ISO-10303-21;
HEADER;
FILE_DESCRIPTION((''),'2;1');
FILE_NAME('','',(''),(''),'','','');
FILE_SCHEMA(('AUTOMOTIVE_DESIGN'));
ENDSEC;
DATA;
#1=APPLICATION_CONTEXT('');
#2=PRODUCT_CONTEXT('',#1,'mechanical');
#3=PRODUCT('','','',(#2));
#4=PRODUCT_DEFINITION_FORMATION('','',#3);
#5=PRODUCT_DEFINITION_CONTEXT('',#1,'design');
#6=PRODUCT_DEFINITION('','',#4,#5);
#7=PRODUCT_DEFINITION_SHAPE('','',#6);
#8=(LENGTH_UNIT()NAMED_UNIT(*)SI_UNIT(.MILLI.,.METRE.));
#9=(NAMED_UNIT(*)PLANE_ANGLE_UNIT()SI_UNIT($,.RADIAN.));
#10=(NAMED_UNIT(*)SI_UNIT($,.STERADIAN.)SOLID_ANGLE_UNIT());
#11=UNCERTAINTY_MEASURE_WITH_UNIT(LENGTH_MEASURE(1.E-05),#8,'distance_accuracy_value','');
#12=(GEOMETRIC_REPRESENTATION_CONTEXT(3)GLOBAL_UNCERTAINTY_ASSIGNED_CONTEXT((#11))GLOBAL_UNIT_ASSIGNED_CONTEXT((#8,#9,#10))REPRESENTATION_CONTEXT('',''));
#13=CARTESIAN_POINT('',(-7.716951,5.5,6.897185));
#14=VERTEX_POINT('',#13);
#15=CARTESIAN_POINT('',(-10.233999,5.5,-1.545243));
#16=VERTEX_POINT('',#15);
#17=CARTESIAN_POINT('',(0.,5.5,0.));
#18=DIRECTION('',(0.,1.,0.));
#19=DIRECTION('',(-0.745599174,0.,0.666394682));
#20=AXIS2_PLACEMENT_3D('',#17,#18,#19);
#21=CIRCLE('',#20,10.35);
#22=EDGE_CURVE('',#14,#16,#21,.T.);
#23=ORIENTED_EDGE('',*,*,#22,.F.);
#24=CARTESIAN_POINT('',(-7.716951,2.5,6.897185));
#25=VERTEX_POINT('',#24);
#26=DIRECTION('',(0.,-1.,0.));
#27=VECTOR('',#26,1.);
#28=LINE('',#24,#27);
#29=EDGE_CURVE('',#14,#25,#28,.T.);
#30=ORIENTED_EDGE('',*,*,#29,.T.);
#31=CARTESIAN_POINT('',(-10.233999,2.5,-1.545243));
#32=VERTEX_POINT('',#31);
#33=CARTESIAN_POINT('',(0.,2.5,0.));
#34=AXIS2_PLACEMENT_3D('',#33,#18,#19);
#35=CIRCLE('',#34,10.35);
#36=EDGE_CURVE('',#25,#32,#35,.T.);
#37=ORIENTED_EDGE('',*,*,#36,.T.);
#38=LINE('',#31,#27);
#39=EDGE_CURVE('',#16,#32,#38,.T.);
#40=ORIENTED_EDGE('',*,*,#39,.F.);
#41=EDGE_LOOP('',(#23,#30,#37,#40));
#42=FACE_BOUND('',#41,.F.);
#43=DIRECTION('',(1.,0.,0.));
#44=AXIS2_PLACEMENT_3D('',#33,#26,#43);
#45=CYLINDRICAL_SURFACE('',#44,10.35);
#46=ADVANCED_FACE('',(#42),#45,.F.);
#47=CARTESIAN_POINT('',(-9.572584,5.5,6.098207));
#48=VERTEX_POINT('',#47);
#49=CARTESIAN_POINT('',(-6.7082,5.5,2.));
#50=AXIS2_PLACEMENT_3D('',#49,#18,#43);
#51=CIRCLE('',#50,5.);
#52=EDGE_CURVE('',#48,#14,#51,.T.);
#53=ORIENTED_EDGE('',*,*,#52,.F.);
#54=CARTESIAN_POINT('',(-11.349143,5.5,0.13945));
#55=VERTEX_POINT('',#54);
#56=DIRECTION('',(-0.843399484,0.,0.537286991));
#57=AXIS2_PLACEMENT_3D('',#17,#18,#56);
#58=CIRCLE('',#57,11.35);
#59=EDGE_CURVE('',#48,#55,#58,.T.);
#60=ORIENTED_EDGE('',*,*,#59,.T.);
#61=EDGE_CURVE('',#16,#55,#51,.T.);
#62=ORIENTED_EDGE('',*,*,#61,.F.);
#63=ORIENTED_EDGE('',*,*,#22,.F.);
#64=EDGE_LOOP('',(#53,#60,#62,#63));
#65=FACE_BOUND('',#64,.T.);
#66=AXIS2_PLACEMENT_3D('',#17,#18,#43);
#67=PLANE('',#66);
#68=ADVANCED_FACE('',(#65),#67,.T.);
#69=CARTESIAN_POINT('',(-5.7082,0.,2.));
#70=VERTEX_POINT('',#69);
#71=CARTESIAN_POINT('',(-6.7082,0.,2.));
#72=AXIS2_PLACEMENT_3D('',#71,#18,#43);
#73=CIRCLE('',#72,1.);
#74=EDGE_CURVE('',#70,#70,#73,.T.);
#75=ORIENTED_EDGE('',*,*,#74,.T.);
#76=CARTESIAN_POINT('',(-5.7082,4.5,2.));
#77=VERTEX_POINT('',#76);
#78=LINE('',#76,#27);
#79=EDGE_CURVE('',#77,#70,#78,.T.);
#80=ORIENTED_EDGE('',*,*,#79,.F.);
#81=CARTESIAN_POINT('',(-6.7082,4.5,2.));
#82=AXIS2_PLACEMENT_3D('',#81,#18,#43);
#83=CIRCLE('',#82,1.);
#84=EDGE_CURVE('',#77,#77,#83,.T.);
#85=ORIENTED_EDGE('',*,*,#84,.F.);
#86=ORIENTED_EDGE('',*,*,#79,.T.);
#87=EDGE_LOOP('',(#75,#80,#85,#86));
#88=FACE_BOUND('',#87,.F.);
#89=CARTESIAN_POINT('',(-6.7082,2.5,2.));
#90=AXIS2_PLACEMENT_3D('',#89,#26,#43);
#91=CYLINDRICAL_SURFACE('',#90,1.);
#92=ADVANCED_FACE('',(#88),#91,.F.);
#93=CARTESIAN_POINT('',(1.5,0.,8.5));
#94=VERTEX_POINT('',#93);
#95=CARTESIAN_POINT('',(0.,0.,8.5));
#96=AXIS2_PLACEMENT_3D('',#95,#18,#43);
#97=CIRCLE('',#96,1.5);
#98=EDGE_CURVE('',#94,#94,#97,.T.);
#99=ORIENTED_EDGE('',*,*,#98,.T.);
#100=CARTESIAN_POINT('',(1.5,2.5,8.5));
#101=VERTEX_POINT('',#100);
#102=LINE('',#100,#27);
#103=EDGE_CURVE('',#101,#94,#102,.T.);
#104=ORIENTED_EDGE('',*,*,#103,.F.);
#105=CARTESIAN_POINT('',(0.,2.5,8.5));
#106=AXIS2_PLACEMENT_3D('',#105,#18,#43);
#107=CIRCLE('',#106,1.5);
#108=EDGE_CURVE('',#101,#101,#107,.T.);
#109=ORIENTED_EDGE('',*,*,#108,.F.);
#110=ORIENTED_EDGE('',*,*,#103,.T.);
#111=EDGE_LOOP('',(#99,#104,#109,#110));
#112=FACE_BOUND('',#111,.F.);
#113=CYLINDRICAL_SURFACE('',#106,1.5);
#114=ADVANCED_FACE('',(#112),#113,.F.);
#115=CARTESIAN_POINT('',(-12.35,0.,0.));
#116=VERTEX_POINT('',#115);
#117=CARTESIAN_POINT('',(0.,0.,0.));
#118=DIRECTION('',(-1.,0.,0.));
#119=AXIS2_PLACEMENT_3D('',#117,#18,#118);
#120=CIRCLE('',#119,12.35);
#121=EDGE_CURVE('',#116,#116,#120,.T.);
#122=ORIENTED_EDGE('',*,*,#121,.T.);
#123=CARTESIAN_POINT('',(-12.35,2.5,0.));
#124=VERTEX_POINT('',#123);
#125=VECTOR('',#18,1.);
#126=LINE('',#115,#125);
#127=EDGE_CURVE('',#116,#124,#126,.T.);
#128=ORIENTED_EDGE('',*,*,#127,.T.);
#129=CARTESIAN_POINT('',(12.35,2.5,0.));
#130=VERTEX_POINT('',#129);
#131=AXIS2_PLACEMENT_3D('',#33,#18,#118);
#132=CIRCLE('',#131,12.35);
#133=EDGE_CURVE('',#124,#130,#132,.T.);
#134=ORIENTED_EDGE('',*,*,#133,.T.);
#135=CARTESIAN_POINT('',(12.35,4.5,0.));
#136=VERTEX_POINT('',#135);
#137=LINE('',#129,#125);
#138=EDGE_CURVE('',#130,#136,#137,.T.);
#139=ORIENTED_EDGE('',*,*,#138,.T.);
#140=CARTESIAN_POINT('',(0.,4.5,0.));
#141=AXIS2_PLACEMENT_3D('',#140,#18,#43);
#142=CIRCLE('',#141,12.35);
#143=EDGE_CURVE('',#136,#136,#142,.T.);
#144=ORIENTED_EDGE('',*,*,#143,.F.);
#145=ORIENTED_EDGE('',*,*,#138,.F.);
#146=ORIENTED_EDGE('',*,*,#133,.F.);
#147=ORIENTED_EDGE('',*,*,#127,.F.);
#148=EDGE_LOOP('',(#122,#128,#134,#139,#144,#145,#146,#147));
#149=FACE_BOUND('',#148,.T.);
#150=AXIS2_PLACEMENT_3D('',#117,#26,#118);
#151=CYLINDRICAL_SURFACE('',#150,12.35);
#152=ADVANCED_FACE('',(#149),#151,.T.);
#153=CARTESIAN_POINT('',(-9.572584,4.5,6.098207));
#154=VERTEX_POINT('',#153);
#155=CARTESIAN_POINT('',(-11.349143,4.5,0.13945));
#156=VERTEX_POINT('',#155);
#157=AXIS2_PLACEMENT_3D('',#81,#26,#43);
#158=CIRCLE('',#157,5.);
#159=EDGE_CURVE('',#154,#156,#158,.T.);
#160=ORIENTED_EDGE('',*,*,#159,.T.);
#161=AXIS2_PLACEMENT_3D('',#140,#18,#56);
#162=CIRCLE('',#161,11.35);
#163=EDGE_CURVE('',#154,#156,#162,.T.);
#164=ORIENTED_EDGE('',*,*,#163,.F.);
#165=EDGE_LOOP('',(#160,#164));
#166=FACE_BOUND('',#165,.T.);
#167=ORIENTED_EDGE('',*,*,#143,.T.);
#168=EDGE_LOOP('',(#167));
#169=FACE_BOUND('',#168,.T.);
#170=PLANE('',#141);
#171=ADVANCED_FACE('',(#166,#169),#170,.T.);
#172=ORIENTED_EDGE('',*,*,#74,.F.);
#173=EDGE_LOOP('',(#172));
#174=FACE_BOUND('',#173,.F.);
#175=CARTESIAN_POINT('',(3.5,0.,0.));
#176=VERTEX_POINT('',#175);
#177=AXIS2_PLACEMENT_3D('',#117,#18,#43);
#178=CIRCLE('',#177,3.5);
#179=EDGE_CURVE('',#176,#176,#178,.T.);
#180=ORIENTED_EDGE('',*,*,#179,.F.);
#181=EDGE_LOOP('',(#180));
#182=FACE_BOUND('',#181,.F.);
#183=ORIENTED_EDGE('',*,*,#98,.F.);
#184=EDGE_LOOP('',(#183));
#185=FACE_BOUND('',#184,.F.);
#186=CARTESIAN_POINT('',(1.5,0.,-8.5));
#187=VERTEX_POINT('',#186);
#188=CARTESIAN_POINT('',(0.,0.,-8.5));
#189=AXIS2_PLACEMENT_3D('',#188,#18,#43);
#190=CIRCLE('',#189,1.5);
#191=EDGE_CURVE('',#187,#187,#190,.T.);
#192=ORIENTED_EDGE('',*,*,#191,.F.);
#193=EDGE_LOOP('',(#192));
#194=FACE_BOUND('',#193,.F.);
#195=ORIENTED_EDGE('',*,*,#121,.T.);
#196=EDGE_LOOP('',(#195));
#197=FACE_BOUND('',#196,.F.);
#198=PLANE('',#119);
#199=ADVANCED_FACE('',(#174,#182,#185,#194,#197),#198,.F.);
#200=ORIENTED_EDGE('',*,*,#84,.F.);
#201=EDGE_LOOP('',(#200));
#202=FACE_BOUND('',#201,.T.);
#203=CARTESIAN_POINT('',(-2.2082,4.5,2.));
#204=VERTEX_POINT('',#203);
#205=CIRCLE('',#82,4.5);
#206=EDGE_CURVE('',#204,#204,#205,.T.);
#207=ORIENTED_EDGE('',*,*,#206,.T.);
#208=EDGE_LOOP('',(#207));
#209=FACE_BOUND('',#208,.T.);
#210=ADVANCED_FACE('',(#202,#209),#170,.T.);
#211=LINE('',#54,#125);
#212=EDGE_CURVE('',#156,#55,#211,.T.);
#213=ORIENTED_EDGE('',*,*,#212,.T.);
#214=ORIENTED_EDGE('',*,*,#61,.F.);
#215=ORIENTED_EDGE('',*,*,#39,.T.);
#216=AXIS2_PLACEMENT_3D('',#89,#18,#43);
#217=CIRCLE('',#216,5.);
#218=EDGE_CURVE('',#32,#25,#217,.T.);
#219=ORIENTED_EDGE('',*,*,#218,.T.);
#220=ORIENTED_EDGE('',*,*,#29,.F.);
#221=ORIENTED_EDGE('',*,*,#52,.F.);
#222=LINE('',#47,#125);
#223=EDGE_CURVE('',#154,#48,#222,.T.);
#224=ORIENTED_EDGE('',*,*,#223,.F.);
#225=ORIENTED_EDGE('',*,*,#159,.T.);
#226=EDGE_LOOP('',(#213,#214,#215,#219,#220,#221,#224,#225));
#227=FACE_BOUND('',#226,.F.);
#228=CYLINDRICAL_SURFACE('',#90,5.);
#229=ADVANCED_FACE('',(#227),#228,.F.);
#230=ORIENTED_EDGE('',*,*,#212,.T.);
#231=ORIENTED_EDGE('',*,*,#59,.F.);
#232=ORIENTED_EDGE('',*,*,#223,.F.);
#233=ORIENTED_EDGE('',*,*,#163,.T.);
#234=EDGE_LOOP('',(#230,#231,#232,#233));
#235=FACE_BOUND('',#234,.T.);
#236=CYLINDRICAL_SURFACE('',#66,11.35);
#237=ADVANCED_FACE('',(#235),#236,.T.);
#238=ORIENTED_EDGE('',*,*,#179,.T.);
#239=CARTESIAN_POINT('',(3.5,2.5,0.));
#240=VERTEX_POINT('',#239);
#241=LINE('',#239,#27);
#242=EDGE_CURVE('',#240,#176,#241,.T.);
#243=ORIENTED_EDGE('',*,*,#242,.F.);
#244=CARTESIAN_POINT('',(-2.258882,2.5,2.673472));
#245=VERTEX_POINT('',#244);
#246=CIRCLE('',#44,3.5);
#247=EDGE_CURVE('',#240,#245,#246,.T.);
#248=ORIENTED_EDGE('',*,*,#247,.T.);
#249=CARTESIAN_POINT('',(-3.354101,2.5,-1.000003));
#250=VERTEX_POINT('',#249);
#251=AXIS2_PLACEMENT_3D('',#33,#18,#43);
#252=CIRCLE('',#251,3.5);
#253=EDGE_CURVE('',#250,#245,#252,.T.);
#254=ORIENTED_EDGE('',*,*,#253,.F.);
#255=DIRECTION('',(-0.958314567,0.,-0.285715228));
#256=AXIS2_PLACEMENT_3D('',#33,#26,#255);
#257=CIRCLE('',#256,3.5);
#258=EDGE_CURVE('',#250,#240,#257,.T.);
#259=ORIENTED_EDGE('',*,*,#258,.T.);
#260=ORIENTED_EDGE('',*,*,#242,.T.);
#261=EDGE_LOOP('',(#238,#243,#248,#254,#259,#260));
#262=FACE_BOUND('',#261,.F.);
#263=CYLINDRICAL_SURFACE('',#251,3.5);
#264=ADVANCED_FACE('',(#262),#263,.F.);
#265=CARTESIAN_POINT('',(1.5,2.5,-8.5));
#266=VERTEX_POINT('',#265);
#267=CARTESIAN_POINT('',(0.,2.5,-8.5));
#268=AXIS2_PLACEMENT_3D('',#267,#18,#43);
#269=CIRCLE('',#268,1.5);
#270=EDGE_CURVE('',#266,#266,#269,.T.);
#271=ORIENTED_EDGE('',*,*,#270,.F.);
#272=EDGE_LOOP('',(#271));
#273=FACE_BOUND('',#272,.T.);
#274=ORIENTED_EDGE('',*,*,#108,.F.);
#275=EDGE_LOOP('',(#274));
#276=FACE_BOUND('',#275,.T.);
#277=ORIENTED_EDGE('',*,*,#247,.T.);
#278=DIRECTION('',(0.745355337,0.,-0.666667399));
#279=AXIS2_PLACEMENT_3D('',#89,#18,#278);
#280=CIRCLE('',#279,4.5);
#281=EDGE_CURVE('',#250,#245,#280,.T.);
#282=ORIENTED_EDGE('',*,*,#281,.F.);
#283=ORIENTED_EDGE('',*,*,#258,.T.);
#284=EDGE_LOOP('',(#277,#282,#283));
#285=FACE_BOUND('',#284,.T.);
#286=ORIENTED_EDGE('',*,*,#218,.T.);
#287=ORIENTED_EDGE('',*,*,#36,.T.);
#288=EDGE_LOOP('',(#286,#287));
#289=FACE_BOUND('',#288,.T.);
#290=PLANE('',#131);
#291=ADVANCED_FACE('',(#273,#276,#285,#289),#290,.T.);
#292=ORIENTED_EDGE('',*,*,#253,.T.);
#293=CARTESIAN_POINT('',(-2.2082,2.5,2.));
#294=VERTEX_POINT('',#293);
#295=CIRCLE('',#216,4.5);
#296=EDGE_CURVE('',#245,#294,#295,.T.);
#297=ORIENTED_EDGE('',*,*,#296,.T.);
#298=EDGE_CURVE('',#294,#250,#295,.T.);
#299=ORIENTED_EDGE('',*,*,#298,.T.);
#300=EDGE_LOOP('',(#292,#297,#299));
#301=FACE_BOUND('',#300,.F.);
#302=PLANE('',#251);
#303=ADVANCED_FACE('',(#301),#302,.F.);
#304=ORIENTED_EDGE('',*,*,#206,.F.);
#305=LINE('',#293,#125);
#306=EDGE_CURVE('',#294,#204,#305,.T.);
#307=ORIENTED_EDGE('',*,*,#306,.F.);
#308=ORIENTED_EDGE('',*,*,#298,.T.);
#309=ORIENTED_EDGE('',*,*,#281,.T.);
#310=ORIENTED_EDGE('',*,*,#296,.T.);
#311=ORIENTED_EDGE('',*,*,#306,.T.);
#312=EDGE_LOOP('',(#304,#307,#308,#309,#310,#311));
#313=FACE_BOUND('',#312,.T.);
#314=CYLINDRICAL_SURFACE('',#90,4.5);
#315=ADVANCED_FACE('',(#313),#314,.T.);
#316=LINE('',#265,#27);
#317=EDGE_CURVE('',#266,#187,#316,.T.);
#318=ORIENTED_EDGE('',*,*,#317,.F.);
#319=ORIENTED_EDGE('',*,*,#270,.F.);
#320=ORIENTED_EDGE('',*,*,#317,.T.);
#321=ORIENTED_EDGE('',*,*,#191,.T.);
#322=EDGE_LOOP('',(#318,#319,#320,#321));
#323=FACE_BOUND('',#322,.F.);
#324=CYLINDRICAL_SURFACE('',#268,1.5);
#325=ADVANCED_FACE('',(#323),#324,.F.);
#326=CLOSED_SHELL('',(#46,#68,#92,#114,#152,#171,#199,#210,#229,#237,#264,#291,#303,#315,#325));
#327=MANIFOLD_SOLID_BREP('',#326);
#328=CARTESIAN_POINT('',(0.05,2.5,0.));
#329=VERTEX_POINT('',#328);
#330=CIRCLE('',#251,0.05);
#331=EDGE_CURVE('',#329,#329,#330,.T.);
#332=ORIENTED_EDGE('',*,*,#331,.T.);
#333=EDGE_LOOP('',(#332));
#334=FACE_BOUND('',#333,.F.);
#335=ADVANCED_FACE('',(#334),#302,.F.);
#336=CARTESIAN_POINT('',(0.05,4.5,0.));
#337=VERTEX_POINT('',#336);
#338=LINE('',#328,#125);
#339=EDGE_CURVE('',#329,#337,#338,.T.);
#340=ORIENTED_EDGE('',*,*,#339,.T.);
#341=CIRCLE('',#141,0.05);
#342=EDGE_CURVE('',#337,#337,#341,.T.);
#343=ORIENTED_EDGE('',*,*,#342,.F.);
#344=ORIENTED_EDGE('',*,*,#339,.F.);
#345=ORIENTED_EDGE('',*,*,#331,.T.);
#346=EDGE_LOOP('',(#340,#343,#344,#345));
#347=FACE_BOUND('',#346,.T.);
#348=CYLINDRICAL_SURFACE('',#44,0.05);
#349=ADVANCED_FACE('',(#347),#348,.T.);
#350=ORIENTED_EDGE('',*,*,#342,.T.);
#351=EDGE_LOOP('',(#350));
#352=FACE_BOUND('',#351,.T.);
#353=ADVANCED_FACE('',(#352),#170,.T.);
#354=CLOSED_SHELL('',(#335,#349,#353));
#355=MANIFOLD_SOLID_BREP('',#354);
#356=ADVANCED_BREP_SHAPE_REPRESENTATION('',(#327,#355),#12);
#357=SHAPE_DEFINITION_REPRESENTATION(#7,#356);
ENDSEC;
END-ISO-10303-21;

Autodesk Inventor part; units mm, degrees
ref_plane "YZ Plane" through (0, 0, 0) normal (1, 0, 0) x (0, 1, 0)
ref_plane "XZ Plane" through (0, 0, 0) normal (0, 1, 0) x (-1, 0, 0)
ref_plane "XY Plane" through (0, 0, 0) normal (0, 0, 1) x (1, 0, 0)
sketch "Szkic1" plane through (0, 0, 0) normal (0, 1, 0) x (-1, 0, 0)
  circle A0 centre (0, 0) radius 12.35
  dimension "d0" = 24.7
extrude "Wyciągnięcie proste1" add sketch "Szkic1" along normal blind 2.5
sketch "Szkic2" plane through (0, 2.5, 0) normal (0, 1, 0) x (1, 0, 0)
  circle A0 centre (0, 0) radius 3.5
  dimension "d3" = 7
extrude "Wyciągnięcie proste2" cut sketch "Szkic2" against normal blind 2.5
sketch "Szkic3" plane through (0, 2.5, 0) normal (0, 1, 0) x (1, 0, 0)
  circle A0 centre (0, -8.5) radius 1.5
  circle A1 centre (0, 8.5) radius 1.5
  point P0 (0, 0)
  dimension "d6" = 3
  dimension "d7" = 3
  dimension "d8" = 17
  dimension "d9" = 8.5
extrude "Wyciągnięcie proste3" cut sketch "Szkic3" against normal blind 2.5
sketch "Szkic4" plane through (0, 2.5, 0) normal (0, 1, 0) x (1, 0, 0)
  circle A0 centre (-6.7082, -2) radius 1
  circle A1 centre (-5.7446, 4) radius 1 construction
  point P0 (0, 0)
  dimension "d12" = 2
  dimension "d13" = 7
  dimension "d31" = 2
  dimension "d32" = 7
  dimension "d33" = 6
  dimension "d34" = 2
extrude "Wyciągnięcie proste4" cut sketch "Szkic4" against normal blind 2.5
sketch "Szkic6" plane through (0, 2.5, 0) normal (0, 1, 0) x (1, 0, 0)
  circle A0 centre (0, 0) radius 12.35
  circle A1 centre (0, 0) radius 10.35
  circle A2 centre (0, 0) radius 12.35 projected
  dimension "d19" = 2
  dimension "d20" = 0
extrude "Wyciągnięcie proste6" add sketch "Szkic6" along normal blind 3
sketch "Szkic7" plane through (0, 5.5, 0) normal (0, 1, 0) x (1, 0, 0)
  circle A0 centre (0, 0) radius 12.35
  circle A1 centre (0, 0) radius 11.35
  circle A2 centre (0, 0) radius 12.35 projected
  dimension "d23" = 1
  dimension "d24" = 0
extrude "Wyciągnięcie proste7" cut sketch "Szkic7" against normal blind 1
sketch "Szkic5" plane through (0, 2.5, 0) normal (0, 1, 0) x (1, 0, 0)
  circle A0 centre (-6.7082, -2) radius 5
  circle A1 centre (-6.7082, -2) radius 1 projected
  point P0 (0, 0)
  point P1 (-7, 0)
  dimension "d27" = 10
extrude "Wyciągnięcie proste5" cut sketch "Szkic5" along normal blind 3 contours A0 | A1
sketch "Szkic8" plane through (0, 2.5, 0) normal (0, 1, 0) x (1, 0, 0)
  circle A0 centre (-6.7082, -2) radius 1 projected
  circle A1 centre (-6.7082, -2) radius 4.5
  point P0 (0, 0)
  dimension "d28" = 9
extrude "Wyciągnięcie proste8" add sketch "Szkic8" along normal blind 2
sketch "Szkic9" plane through (0, 2.5, 0) normal (0, 1, 0) x (1, 0, 0)
  circle A0 centre (0, 0) radius 0.05
  dimension "d35" = 0.1
extrude "Wyciągnięcie proste9" add sketch "Szkic9" along normal blind 2
properties part number "GEAR_BOTTOM" material "Ołów"
